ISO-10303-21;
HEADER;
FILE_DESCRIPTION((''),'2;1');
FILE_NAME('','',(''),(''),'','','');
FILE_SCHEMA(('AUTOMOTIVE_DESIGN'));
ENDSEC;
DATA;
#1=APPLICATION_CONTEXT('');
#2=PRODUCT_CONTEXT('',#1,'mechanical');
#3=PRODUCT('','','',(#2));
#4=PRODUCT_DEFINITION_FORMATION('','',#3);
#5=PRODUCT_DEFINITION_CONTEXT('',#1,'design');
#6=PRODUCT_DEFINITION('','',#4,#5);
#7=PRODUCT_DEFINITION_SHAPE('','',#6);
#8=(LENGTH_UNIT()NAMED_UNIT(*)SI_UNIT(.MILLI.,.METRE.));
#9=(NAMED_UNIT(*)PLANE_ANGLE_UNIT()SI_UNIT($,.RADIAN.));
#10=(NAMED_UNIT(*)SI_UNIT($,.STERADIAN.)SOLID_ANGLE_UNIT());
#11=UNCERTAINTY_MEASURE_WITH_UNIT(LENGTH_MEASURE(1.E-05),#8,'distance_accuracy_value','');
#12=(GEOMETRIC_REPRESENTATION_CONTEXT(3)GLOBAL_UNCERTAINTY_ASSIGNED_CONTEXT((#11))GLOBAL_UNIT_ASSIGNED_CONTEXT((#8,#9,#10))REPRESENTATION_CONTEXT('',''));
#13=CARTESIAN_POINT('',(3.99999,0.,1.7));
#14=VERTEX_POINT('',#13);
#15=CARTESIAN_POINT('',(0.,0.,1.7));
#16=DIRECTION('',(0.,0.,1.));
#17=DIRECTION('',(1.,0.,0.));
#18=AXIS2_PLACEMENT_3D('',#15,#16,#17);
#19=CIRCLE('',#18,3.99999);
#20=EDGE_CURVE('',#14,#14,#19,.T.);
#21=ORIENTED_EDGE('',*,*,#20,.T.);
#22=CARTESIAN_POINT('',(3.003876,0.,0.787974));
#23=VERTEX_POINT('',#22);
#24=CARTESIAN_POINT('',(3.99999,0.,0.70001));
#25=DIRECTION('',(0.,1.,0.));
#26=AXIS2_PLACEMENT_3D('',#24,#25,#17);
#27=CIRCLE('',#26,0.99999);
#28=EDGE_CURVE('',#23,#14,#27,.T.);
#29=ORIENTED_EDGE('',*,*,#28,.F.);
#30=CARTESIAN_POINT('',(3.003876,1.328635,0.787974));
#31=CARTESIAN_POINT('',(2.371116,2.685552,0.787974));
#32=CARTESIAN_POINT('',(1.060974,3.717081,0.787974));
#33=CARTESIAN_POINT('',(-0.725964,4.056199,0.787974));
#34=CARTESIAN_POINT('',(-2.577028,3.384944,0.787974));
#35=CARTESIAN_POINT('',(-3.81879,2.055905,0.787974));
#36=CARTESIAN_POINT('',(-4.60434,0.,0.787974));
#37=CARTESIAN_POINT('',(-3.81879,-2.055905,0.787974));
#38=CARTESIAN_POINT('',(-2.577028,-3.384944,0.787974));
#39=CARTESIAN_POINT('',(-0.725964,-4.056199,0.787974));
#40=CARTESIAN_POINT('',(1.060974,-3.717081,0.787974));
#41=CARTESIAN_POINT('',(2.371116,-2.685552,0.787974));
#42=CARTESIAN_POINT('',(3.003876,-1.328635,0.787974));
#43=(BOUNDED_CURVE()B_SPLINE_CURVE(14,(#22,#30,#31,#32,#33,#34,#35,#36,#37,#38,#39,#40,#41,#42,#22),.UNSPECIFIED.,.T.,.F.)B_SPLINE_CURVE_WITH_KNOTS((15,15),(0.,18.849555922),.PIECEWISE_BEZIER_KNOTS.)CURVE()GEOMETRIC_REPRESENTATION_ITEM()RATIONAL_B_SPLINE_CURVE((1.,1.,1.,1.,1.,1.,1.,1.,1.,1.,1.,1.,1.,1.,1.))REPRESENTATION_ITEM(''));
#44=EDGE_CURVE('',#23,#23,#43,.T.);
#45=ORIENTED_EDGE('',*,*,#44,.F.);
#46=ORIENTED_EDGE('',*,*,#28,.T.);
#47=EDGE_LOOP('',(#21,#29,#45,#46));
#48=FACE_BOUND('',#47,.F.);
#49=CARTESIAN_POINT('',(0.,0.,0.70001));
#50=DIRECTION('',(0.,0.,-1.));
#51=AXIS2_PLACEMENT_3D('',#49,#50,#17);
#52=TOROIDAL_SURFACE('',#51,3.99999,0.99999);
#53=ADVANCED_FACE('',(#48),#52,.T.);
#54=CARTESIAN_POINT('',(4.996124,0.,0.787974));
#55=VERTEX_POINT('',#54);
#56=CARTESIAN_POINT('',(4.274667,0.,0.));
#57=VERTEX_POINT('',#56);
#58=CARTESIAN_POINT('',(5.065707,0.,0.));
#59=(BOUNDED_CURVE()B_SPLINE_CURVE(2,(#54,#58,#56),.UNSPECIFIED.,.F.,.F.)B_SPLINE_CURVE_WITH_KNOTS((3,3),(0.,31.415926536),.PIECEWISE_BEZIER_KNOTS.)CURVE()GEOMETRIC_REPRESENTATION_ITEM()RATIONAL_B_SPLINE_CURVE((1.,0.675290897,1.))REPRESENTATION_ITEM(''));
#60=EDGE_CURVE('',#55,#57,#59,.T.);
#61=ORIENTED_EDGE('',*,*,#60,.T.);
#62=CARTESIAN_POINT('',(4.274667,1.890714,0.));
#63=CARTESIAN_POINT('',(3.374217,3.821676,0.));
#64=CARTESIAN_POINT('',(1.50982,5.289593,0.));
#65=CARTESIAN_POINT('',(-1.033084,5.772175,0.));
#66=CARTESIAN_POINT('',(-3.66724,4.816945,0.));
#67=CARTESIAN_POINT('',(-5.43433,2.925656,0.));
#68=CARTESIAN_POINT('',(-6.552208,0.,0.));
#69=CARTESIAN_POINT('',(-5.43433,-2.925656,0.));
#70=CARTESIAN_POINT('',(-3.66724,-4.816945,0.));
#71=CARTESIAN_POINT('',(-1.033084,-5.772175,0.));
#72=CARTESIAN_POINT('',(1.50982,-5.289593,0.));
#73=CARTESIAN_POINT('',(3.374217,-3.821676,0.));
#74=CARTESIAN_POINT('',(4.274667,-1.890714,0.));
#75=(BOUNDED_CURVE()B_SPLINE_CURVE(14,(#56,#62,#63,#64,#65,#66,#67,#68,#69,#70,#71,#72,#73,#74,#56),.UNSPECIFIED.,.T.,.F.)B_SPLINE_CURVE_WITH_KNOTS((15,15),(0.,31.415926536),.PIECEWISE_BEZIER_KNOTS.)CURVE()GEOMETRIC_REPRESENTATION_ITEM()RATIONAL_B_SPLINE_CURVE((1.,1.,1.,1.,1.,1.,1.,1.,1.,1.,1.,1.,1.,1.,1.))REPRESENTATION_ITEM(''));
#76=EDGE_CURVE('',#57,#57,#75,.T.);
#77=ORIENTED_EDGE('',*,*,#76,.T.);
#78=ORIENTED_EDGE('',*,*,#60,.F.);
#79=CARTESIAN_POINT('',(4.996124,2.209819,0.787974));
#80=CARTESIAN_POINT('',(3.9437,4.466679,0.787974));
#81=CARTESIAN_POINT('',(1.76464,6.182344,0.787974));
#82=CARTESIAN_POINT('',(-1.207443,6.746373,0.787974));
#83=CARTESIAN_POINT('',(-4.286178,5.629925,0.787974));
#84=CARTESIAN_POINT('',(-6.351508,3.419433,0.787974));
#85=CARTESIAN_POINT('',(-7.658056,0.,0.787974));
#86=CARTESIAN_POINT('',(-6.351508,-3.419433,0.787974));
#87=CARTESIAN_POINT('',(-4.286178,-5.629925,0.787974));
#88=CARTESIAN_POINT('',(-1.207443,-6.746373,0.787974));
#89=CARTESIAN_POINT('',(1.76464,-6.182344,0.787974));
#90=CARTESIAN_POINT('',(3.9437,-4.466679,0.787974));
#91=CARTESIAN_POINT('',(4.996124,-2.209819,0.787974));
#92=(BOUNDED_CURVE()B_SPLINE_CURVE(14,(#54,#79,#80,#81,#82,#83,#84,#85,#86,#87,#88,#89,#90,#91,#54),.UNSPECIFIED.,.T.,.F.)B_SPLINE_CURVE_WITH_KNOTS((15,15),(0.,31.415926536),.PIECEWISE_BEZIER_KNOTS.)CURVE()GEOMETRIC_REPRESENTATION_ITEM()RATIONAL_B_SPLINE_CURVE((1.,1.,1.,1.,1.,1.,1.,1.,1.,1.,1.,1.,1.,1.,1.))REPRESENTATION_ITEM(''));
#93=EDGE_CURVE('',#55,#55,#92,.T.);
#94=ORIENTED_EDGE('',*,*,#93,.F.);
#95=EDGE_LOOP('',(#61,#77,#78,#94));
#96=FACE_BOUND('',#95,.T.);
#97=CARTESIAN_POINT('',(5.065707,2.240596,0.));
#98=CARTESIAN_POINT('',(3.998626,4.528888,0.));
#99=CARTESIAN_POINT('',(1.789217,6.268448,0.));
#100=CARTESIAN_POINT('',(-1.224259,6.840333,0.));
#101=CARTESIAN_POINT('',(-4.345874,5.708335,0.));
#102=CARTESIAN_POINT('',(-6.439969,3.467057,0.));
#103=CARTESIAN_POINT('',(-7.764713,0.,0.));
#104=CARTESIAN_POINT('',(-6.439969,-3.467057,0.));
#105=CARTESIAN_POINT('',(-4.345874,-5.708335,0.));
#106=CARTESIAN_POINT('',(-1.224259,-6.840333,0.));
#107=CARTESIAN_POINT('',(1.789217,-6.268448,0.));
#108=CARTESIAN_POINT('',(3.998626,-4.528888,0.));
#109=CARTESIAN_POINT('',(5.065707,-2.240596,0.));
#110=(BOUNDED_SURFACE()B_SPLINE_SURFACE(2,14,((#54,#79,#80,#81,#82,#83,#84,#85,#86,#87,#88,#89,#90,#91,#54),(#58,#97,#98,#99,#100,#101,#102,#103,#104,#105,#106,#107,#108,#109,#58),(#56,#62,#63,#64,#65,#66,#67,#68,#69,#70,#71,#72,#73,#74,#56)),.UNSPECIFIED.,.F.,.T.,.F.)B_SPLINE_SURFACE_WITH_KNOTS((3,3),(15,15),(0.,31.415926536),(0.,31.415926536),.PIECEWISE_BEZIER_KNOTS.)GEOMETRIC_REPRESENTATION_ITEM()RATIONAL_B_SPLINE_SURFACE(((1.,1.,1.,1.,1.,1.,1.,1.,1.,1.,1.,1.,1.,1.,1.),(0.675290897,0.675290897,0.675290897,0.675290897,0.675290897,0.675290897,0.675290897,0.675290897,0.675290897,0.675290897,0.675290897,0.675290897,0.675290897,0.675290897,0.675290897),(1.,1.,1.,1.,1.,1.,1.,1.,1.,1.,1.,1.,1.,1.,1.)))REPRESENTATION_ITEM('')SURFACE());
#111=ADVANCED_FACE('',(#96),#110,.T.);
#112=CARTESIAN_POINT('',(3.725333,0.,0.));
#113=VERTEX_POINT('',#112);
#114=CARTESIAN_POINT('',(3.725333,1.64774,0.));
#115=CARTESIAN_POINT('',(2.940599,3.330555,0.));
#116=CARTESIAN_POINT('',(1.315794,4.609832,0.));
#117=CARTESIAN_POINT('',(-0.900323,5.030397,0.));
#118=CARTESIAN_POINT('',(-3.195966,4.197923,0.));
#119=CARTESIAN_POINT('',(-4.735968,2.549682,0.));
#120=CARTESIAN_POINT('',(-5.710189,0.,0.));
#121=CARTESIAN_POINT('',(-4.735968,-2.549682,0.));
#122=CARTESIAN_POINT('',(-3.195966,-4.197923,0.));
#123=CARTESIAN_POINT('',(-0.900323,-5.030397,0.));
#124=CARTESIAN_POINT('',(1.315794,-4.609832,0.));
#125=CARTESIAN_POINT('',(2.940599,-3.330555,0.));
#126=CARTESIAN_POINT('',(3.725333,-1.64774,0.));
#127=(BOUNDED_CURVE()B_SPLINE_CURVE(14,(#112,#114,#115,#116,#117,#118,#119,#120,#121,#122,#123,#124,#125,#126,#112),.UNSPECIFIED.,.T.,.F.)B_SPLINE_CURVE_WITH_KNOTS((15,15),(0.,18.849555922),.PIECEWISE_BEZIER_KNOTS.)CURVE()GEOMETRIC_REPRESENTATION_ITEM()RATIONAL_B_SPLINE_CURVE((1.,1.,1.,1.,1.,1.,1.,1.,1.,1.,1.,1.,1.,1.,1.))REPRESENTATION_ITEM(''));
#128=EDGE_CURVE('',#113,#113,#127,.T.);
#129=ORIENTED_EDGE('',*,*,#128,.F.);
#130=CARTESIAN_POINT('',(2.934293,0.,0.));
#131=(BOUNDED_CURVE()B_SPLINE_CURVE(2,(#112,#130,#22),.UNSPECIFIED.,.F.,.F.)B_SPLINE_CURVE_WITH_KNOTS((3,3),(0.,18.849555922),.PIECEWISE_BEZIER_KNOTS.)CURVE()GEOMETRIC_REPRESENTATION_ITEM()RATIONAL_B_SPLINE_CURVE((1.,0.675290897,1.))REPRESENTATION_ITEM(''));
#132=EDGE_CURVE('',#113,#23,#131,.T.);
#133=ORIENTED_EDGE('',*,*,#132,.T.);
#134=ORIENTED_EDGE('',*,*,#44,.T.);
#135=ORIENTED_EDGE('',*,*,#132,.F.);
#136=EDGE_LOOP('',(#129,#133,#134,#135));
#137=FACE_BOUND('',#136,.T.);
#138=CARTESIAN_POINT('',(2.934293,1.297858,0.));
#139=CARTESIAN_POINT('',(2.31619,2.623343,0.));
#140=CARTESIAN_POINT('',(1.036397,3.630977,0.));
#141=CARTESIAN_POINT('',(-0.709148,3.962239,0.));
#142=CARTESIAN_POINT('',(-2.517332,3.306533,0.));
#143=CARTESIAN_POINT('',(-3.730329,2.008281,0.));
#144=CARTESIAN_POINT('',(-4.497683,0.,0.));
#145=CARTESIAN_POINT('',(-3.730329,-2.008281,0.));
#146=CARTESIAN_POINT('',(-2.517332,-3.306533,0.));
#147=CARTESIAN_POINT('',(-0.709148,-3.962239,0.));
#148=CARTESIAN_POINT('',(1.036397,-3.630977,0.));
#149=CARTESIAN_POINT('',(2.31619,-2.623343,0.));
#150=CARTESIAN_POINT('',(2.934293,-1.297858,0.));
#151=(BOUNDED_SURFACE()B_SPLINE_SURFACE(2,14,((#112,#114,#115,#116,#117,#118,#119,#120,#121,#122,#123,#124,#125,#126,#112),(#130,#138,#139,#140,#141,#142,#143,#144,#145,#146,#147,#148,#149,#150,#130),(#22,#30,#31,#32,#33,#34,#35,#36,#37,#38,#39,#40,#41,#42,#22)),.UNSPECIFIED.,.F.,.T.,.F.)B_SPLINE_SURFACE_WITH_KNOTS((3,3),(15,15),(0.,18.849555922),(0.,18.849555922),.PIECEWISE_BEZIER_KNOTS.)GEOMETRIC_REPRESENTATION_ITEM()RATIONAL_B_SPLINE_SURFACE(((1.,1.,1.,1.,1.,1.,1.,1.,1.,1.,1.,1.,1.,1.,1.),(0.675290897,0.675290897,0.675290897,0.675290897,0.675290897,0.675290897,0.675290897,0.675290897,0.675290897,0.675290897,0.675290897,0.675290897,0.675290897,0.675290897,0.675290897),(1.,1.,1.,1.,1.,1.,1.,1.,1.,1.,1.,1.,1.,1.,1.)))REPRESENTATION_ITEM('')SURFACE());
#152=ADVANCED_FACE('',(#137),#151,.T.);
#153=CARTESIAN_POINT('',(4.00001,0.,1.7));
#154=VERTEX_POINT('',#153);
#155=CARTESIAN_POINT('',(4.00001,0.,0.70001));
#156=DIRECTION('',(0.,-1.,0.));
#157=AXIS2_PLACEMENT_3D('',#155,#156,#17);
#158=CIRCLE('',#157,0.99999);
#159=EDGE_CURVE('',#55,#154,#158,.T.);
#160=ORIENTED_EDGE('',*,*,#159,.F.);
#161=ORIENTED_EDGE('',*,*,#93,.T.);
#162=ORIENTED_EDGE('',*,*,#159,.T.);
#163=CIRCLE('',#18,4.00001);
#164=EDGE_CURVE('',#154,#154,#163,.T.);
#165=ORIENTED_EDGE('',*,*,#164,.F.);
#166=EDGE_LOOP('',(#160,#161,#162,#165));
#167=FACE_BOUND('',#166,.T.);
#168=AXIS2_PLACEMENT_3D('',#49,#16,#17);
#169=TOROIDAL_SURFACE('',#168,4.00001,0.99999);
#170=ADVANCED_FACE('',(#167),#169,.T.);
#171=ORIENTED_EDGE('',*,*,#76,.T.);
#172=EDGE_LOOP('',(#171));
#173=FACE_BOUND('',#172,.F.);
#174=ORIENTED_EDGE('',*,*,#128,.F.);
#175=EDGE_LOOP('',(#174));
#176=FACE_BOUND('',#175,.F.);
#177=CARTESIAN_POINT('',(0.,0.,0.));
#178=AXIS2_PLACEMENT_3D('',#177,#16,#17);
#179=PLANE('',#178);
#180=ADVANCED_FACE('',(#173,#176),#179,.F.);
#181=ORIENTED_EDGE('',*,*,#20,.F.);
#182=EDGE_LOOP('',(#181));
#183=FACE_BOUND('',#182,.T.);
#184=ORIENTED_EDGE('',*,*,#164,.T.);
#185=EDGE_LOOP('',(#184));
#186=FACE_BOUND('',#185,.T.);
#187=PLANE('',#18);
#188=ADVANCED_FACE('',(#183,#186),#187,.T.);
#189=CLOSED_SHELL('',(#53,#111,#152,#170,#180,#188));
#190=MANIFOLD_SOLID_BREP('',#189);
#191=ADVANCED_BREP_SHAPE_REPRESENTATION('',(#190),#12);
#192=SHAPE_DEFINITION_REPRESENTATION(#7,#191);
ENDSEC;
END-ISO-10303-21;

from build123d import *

# Parameters (mm, degrees)
F0_R     = 5
F0_R_2   = 3
F1_DEPTH = 1.7
F2_R     = 0.99999
F3_R     = 0.7242640687


# Not quite as in the source:
# - a fillet or chamfer is up to 0.001 mm smaller than in the source, because OpenCascade refuses the exact size


with BuildPart() as f1:
    # F0 (on Top) → F1 (new body)
    with BuildSketch(Plane.XY):
        Circle(F0_R)
        Circle(F0_R_2, mode=Mode.SUBTRACT)
    extrude(amount=F1_DEPTH)

    # F2 (radius 1 in the source; OpenCascade refuses exactly that, so slightly less here)
    f2_edges = [f1.edges().sort_by_distance(p)[0] for p in [
        (-5, 0, 1.7),
        (-3, 0, 1.7),
    ]]
    fillet(f2_edges, radius=F2_R)

    # F3
    f3_edges = [f1.edges().sort_by_distance(p)[0] for p in [
        (-5, 0, 0),
        (-3, 0, 0),
    ]]
    fillet(f3_edges, radius=F3_R)


solid = f1.part
